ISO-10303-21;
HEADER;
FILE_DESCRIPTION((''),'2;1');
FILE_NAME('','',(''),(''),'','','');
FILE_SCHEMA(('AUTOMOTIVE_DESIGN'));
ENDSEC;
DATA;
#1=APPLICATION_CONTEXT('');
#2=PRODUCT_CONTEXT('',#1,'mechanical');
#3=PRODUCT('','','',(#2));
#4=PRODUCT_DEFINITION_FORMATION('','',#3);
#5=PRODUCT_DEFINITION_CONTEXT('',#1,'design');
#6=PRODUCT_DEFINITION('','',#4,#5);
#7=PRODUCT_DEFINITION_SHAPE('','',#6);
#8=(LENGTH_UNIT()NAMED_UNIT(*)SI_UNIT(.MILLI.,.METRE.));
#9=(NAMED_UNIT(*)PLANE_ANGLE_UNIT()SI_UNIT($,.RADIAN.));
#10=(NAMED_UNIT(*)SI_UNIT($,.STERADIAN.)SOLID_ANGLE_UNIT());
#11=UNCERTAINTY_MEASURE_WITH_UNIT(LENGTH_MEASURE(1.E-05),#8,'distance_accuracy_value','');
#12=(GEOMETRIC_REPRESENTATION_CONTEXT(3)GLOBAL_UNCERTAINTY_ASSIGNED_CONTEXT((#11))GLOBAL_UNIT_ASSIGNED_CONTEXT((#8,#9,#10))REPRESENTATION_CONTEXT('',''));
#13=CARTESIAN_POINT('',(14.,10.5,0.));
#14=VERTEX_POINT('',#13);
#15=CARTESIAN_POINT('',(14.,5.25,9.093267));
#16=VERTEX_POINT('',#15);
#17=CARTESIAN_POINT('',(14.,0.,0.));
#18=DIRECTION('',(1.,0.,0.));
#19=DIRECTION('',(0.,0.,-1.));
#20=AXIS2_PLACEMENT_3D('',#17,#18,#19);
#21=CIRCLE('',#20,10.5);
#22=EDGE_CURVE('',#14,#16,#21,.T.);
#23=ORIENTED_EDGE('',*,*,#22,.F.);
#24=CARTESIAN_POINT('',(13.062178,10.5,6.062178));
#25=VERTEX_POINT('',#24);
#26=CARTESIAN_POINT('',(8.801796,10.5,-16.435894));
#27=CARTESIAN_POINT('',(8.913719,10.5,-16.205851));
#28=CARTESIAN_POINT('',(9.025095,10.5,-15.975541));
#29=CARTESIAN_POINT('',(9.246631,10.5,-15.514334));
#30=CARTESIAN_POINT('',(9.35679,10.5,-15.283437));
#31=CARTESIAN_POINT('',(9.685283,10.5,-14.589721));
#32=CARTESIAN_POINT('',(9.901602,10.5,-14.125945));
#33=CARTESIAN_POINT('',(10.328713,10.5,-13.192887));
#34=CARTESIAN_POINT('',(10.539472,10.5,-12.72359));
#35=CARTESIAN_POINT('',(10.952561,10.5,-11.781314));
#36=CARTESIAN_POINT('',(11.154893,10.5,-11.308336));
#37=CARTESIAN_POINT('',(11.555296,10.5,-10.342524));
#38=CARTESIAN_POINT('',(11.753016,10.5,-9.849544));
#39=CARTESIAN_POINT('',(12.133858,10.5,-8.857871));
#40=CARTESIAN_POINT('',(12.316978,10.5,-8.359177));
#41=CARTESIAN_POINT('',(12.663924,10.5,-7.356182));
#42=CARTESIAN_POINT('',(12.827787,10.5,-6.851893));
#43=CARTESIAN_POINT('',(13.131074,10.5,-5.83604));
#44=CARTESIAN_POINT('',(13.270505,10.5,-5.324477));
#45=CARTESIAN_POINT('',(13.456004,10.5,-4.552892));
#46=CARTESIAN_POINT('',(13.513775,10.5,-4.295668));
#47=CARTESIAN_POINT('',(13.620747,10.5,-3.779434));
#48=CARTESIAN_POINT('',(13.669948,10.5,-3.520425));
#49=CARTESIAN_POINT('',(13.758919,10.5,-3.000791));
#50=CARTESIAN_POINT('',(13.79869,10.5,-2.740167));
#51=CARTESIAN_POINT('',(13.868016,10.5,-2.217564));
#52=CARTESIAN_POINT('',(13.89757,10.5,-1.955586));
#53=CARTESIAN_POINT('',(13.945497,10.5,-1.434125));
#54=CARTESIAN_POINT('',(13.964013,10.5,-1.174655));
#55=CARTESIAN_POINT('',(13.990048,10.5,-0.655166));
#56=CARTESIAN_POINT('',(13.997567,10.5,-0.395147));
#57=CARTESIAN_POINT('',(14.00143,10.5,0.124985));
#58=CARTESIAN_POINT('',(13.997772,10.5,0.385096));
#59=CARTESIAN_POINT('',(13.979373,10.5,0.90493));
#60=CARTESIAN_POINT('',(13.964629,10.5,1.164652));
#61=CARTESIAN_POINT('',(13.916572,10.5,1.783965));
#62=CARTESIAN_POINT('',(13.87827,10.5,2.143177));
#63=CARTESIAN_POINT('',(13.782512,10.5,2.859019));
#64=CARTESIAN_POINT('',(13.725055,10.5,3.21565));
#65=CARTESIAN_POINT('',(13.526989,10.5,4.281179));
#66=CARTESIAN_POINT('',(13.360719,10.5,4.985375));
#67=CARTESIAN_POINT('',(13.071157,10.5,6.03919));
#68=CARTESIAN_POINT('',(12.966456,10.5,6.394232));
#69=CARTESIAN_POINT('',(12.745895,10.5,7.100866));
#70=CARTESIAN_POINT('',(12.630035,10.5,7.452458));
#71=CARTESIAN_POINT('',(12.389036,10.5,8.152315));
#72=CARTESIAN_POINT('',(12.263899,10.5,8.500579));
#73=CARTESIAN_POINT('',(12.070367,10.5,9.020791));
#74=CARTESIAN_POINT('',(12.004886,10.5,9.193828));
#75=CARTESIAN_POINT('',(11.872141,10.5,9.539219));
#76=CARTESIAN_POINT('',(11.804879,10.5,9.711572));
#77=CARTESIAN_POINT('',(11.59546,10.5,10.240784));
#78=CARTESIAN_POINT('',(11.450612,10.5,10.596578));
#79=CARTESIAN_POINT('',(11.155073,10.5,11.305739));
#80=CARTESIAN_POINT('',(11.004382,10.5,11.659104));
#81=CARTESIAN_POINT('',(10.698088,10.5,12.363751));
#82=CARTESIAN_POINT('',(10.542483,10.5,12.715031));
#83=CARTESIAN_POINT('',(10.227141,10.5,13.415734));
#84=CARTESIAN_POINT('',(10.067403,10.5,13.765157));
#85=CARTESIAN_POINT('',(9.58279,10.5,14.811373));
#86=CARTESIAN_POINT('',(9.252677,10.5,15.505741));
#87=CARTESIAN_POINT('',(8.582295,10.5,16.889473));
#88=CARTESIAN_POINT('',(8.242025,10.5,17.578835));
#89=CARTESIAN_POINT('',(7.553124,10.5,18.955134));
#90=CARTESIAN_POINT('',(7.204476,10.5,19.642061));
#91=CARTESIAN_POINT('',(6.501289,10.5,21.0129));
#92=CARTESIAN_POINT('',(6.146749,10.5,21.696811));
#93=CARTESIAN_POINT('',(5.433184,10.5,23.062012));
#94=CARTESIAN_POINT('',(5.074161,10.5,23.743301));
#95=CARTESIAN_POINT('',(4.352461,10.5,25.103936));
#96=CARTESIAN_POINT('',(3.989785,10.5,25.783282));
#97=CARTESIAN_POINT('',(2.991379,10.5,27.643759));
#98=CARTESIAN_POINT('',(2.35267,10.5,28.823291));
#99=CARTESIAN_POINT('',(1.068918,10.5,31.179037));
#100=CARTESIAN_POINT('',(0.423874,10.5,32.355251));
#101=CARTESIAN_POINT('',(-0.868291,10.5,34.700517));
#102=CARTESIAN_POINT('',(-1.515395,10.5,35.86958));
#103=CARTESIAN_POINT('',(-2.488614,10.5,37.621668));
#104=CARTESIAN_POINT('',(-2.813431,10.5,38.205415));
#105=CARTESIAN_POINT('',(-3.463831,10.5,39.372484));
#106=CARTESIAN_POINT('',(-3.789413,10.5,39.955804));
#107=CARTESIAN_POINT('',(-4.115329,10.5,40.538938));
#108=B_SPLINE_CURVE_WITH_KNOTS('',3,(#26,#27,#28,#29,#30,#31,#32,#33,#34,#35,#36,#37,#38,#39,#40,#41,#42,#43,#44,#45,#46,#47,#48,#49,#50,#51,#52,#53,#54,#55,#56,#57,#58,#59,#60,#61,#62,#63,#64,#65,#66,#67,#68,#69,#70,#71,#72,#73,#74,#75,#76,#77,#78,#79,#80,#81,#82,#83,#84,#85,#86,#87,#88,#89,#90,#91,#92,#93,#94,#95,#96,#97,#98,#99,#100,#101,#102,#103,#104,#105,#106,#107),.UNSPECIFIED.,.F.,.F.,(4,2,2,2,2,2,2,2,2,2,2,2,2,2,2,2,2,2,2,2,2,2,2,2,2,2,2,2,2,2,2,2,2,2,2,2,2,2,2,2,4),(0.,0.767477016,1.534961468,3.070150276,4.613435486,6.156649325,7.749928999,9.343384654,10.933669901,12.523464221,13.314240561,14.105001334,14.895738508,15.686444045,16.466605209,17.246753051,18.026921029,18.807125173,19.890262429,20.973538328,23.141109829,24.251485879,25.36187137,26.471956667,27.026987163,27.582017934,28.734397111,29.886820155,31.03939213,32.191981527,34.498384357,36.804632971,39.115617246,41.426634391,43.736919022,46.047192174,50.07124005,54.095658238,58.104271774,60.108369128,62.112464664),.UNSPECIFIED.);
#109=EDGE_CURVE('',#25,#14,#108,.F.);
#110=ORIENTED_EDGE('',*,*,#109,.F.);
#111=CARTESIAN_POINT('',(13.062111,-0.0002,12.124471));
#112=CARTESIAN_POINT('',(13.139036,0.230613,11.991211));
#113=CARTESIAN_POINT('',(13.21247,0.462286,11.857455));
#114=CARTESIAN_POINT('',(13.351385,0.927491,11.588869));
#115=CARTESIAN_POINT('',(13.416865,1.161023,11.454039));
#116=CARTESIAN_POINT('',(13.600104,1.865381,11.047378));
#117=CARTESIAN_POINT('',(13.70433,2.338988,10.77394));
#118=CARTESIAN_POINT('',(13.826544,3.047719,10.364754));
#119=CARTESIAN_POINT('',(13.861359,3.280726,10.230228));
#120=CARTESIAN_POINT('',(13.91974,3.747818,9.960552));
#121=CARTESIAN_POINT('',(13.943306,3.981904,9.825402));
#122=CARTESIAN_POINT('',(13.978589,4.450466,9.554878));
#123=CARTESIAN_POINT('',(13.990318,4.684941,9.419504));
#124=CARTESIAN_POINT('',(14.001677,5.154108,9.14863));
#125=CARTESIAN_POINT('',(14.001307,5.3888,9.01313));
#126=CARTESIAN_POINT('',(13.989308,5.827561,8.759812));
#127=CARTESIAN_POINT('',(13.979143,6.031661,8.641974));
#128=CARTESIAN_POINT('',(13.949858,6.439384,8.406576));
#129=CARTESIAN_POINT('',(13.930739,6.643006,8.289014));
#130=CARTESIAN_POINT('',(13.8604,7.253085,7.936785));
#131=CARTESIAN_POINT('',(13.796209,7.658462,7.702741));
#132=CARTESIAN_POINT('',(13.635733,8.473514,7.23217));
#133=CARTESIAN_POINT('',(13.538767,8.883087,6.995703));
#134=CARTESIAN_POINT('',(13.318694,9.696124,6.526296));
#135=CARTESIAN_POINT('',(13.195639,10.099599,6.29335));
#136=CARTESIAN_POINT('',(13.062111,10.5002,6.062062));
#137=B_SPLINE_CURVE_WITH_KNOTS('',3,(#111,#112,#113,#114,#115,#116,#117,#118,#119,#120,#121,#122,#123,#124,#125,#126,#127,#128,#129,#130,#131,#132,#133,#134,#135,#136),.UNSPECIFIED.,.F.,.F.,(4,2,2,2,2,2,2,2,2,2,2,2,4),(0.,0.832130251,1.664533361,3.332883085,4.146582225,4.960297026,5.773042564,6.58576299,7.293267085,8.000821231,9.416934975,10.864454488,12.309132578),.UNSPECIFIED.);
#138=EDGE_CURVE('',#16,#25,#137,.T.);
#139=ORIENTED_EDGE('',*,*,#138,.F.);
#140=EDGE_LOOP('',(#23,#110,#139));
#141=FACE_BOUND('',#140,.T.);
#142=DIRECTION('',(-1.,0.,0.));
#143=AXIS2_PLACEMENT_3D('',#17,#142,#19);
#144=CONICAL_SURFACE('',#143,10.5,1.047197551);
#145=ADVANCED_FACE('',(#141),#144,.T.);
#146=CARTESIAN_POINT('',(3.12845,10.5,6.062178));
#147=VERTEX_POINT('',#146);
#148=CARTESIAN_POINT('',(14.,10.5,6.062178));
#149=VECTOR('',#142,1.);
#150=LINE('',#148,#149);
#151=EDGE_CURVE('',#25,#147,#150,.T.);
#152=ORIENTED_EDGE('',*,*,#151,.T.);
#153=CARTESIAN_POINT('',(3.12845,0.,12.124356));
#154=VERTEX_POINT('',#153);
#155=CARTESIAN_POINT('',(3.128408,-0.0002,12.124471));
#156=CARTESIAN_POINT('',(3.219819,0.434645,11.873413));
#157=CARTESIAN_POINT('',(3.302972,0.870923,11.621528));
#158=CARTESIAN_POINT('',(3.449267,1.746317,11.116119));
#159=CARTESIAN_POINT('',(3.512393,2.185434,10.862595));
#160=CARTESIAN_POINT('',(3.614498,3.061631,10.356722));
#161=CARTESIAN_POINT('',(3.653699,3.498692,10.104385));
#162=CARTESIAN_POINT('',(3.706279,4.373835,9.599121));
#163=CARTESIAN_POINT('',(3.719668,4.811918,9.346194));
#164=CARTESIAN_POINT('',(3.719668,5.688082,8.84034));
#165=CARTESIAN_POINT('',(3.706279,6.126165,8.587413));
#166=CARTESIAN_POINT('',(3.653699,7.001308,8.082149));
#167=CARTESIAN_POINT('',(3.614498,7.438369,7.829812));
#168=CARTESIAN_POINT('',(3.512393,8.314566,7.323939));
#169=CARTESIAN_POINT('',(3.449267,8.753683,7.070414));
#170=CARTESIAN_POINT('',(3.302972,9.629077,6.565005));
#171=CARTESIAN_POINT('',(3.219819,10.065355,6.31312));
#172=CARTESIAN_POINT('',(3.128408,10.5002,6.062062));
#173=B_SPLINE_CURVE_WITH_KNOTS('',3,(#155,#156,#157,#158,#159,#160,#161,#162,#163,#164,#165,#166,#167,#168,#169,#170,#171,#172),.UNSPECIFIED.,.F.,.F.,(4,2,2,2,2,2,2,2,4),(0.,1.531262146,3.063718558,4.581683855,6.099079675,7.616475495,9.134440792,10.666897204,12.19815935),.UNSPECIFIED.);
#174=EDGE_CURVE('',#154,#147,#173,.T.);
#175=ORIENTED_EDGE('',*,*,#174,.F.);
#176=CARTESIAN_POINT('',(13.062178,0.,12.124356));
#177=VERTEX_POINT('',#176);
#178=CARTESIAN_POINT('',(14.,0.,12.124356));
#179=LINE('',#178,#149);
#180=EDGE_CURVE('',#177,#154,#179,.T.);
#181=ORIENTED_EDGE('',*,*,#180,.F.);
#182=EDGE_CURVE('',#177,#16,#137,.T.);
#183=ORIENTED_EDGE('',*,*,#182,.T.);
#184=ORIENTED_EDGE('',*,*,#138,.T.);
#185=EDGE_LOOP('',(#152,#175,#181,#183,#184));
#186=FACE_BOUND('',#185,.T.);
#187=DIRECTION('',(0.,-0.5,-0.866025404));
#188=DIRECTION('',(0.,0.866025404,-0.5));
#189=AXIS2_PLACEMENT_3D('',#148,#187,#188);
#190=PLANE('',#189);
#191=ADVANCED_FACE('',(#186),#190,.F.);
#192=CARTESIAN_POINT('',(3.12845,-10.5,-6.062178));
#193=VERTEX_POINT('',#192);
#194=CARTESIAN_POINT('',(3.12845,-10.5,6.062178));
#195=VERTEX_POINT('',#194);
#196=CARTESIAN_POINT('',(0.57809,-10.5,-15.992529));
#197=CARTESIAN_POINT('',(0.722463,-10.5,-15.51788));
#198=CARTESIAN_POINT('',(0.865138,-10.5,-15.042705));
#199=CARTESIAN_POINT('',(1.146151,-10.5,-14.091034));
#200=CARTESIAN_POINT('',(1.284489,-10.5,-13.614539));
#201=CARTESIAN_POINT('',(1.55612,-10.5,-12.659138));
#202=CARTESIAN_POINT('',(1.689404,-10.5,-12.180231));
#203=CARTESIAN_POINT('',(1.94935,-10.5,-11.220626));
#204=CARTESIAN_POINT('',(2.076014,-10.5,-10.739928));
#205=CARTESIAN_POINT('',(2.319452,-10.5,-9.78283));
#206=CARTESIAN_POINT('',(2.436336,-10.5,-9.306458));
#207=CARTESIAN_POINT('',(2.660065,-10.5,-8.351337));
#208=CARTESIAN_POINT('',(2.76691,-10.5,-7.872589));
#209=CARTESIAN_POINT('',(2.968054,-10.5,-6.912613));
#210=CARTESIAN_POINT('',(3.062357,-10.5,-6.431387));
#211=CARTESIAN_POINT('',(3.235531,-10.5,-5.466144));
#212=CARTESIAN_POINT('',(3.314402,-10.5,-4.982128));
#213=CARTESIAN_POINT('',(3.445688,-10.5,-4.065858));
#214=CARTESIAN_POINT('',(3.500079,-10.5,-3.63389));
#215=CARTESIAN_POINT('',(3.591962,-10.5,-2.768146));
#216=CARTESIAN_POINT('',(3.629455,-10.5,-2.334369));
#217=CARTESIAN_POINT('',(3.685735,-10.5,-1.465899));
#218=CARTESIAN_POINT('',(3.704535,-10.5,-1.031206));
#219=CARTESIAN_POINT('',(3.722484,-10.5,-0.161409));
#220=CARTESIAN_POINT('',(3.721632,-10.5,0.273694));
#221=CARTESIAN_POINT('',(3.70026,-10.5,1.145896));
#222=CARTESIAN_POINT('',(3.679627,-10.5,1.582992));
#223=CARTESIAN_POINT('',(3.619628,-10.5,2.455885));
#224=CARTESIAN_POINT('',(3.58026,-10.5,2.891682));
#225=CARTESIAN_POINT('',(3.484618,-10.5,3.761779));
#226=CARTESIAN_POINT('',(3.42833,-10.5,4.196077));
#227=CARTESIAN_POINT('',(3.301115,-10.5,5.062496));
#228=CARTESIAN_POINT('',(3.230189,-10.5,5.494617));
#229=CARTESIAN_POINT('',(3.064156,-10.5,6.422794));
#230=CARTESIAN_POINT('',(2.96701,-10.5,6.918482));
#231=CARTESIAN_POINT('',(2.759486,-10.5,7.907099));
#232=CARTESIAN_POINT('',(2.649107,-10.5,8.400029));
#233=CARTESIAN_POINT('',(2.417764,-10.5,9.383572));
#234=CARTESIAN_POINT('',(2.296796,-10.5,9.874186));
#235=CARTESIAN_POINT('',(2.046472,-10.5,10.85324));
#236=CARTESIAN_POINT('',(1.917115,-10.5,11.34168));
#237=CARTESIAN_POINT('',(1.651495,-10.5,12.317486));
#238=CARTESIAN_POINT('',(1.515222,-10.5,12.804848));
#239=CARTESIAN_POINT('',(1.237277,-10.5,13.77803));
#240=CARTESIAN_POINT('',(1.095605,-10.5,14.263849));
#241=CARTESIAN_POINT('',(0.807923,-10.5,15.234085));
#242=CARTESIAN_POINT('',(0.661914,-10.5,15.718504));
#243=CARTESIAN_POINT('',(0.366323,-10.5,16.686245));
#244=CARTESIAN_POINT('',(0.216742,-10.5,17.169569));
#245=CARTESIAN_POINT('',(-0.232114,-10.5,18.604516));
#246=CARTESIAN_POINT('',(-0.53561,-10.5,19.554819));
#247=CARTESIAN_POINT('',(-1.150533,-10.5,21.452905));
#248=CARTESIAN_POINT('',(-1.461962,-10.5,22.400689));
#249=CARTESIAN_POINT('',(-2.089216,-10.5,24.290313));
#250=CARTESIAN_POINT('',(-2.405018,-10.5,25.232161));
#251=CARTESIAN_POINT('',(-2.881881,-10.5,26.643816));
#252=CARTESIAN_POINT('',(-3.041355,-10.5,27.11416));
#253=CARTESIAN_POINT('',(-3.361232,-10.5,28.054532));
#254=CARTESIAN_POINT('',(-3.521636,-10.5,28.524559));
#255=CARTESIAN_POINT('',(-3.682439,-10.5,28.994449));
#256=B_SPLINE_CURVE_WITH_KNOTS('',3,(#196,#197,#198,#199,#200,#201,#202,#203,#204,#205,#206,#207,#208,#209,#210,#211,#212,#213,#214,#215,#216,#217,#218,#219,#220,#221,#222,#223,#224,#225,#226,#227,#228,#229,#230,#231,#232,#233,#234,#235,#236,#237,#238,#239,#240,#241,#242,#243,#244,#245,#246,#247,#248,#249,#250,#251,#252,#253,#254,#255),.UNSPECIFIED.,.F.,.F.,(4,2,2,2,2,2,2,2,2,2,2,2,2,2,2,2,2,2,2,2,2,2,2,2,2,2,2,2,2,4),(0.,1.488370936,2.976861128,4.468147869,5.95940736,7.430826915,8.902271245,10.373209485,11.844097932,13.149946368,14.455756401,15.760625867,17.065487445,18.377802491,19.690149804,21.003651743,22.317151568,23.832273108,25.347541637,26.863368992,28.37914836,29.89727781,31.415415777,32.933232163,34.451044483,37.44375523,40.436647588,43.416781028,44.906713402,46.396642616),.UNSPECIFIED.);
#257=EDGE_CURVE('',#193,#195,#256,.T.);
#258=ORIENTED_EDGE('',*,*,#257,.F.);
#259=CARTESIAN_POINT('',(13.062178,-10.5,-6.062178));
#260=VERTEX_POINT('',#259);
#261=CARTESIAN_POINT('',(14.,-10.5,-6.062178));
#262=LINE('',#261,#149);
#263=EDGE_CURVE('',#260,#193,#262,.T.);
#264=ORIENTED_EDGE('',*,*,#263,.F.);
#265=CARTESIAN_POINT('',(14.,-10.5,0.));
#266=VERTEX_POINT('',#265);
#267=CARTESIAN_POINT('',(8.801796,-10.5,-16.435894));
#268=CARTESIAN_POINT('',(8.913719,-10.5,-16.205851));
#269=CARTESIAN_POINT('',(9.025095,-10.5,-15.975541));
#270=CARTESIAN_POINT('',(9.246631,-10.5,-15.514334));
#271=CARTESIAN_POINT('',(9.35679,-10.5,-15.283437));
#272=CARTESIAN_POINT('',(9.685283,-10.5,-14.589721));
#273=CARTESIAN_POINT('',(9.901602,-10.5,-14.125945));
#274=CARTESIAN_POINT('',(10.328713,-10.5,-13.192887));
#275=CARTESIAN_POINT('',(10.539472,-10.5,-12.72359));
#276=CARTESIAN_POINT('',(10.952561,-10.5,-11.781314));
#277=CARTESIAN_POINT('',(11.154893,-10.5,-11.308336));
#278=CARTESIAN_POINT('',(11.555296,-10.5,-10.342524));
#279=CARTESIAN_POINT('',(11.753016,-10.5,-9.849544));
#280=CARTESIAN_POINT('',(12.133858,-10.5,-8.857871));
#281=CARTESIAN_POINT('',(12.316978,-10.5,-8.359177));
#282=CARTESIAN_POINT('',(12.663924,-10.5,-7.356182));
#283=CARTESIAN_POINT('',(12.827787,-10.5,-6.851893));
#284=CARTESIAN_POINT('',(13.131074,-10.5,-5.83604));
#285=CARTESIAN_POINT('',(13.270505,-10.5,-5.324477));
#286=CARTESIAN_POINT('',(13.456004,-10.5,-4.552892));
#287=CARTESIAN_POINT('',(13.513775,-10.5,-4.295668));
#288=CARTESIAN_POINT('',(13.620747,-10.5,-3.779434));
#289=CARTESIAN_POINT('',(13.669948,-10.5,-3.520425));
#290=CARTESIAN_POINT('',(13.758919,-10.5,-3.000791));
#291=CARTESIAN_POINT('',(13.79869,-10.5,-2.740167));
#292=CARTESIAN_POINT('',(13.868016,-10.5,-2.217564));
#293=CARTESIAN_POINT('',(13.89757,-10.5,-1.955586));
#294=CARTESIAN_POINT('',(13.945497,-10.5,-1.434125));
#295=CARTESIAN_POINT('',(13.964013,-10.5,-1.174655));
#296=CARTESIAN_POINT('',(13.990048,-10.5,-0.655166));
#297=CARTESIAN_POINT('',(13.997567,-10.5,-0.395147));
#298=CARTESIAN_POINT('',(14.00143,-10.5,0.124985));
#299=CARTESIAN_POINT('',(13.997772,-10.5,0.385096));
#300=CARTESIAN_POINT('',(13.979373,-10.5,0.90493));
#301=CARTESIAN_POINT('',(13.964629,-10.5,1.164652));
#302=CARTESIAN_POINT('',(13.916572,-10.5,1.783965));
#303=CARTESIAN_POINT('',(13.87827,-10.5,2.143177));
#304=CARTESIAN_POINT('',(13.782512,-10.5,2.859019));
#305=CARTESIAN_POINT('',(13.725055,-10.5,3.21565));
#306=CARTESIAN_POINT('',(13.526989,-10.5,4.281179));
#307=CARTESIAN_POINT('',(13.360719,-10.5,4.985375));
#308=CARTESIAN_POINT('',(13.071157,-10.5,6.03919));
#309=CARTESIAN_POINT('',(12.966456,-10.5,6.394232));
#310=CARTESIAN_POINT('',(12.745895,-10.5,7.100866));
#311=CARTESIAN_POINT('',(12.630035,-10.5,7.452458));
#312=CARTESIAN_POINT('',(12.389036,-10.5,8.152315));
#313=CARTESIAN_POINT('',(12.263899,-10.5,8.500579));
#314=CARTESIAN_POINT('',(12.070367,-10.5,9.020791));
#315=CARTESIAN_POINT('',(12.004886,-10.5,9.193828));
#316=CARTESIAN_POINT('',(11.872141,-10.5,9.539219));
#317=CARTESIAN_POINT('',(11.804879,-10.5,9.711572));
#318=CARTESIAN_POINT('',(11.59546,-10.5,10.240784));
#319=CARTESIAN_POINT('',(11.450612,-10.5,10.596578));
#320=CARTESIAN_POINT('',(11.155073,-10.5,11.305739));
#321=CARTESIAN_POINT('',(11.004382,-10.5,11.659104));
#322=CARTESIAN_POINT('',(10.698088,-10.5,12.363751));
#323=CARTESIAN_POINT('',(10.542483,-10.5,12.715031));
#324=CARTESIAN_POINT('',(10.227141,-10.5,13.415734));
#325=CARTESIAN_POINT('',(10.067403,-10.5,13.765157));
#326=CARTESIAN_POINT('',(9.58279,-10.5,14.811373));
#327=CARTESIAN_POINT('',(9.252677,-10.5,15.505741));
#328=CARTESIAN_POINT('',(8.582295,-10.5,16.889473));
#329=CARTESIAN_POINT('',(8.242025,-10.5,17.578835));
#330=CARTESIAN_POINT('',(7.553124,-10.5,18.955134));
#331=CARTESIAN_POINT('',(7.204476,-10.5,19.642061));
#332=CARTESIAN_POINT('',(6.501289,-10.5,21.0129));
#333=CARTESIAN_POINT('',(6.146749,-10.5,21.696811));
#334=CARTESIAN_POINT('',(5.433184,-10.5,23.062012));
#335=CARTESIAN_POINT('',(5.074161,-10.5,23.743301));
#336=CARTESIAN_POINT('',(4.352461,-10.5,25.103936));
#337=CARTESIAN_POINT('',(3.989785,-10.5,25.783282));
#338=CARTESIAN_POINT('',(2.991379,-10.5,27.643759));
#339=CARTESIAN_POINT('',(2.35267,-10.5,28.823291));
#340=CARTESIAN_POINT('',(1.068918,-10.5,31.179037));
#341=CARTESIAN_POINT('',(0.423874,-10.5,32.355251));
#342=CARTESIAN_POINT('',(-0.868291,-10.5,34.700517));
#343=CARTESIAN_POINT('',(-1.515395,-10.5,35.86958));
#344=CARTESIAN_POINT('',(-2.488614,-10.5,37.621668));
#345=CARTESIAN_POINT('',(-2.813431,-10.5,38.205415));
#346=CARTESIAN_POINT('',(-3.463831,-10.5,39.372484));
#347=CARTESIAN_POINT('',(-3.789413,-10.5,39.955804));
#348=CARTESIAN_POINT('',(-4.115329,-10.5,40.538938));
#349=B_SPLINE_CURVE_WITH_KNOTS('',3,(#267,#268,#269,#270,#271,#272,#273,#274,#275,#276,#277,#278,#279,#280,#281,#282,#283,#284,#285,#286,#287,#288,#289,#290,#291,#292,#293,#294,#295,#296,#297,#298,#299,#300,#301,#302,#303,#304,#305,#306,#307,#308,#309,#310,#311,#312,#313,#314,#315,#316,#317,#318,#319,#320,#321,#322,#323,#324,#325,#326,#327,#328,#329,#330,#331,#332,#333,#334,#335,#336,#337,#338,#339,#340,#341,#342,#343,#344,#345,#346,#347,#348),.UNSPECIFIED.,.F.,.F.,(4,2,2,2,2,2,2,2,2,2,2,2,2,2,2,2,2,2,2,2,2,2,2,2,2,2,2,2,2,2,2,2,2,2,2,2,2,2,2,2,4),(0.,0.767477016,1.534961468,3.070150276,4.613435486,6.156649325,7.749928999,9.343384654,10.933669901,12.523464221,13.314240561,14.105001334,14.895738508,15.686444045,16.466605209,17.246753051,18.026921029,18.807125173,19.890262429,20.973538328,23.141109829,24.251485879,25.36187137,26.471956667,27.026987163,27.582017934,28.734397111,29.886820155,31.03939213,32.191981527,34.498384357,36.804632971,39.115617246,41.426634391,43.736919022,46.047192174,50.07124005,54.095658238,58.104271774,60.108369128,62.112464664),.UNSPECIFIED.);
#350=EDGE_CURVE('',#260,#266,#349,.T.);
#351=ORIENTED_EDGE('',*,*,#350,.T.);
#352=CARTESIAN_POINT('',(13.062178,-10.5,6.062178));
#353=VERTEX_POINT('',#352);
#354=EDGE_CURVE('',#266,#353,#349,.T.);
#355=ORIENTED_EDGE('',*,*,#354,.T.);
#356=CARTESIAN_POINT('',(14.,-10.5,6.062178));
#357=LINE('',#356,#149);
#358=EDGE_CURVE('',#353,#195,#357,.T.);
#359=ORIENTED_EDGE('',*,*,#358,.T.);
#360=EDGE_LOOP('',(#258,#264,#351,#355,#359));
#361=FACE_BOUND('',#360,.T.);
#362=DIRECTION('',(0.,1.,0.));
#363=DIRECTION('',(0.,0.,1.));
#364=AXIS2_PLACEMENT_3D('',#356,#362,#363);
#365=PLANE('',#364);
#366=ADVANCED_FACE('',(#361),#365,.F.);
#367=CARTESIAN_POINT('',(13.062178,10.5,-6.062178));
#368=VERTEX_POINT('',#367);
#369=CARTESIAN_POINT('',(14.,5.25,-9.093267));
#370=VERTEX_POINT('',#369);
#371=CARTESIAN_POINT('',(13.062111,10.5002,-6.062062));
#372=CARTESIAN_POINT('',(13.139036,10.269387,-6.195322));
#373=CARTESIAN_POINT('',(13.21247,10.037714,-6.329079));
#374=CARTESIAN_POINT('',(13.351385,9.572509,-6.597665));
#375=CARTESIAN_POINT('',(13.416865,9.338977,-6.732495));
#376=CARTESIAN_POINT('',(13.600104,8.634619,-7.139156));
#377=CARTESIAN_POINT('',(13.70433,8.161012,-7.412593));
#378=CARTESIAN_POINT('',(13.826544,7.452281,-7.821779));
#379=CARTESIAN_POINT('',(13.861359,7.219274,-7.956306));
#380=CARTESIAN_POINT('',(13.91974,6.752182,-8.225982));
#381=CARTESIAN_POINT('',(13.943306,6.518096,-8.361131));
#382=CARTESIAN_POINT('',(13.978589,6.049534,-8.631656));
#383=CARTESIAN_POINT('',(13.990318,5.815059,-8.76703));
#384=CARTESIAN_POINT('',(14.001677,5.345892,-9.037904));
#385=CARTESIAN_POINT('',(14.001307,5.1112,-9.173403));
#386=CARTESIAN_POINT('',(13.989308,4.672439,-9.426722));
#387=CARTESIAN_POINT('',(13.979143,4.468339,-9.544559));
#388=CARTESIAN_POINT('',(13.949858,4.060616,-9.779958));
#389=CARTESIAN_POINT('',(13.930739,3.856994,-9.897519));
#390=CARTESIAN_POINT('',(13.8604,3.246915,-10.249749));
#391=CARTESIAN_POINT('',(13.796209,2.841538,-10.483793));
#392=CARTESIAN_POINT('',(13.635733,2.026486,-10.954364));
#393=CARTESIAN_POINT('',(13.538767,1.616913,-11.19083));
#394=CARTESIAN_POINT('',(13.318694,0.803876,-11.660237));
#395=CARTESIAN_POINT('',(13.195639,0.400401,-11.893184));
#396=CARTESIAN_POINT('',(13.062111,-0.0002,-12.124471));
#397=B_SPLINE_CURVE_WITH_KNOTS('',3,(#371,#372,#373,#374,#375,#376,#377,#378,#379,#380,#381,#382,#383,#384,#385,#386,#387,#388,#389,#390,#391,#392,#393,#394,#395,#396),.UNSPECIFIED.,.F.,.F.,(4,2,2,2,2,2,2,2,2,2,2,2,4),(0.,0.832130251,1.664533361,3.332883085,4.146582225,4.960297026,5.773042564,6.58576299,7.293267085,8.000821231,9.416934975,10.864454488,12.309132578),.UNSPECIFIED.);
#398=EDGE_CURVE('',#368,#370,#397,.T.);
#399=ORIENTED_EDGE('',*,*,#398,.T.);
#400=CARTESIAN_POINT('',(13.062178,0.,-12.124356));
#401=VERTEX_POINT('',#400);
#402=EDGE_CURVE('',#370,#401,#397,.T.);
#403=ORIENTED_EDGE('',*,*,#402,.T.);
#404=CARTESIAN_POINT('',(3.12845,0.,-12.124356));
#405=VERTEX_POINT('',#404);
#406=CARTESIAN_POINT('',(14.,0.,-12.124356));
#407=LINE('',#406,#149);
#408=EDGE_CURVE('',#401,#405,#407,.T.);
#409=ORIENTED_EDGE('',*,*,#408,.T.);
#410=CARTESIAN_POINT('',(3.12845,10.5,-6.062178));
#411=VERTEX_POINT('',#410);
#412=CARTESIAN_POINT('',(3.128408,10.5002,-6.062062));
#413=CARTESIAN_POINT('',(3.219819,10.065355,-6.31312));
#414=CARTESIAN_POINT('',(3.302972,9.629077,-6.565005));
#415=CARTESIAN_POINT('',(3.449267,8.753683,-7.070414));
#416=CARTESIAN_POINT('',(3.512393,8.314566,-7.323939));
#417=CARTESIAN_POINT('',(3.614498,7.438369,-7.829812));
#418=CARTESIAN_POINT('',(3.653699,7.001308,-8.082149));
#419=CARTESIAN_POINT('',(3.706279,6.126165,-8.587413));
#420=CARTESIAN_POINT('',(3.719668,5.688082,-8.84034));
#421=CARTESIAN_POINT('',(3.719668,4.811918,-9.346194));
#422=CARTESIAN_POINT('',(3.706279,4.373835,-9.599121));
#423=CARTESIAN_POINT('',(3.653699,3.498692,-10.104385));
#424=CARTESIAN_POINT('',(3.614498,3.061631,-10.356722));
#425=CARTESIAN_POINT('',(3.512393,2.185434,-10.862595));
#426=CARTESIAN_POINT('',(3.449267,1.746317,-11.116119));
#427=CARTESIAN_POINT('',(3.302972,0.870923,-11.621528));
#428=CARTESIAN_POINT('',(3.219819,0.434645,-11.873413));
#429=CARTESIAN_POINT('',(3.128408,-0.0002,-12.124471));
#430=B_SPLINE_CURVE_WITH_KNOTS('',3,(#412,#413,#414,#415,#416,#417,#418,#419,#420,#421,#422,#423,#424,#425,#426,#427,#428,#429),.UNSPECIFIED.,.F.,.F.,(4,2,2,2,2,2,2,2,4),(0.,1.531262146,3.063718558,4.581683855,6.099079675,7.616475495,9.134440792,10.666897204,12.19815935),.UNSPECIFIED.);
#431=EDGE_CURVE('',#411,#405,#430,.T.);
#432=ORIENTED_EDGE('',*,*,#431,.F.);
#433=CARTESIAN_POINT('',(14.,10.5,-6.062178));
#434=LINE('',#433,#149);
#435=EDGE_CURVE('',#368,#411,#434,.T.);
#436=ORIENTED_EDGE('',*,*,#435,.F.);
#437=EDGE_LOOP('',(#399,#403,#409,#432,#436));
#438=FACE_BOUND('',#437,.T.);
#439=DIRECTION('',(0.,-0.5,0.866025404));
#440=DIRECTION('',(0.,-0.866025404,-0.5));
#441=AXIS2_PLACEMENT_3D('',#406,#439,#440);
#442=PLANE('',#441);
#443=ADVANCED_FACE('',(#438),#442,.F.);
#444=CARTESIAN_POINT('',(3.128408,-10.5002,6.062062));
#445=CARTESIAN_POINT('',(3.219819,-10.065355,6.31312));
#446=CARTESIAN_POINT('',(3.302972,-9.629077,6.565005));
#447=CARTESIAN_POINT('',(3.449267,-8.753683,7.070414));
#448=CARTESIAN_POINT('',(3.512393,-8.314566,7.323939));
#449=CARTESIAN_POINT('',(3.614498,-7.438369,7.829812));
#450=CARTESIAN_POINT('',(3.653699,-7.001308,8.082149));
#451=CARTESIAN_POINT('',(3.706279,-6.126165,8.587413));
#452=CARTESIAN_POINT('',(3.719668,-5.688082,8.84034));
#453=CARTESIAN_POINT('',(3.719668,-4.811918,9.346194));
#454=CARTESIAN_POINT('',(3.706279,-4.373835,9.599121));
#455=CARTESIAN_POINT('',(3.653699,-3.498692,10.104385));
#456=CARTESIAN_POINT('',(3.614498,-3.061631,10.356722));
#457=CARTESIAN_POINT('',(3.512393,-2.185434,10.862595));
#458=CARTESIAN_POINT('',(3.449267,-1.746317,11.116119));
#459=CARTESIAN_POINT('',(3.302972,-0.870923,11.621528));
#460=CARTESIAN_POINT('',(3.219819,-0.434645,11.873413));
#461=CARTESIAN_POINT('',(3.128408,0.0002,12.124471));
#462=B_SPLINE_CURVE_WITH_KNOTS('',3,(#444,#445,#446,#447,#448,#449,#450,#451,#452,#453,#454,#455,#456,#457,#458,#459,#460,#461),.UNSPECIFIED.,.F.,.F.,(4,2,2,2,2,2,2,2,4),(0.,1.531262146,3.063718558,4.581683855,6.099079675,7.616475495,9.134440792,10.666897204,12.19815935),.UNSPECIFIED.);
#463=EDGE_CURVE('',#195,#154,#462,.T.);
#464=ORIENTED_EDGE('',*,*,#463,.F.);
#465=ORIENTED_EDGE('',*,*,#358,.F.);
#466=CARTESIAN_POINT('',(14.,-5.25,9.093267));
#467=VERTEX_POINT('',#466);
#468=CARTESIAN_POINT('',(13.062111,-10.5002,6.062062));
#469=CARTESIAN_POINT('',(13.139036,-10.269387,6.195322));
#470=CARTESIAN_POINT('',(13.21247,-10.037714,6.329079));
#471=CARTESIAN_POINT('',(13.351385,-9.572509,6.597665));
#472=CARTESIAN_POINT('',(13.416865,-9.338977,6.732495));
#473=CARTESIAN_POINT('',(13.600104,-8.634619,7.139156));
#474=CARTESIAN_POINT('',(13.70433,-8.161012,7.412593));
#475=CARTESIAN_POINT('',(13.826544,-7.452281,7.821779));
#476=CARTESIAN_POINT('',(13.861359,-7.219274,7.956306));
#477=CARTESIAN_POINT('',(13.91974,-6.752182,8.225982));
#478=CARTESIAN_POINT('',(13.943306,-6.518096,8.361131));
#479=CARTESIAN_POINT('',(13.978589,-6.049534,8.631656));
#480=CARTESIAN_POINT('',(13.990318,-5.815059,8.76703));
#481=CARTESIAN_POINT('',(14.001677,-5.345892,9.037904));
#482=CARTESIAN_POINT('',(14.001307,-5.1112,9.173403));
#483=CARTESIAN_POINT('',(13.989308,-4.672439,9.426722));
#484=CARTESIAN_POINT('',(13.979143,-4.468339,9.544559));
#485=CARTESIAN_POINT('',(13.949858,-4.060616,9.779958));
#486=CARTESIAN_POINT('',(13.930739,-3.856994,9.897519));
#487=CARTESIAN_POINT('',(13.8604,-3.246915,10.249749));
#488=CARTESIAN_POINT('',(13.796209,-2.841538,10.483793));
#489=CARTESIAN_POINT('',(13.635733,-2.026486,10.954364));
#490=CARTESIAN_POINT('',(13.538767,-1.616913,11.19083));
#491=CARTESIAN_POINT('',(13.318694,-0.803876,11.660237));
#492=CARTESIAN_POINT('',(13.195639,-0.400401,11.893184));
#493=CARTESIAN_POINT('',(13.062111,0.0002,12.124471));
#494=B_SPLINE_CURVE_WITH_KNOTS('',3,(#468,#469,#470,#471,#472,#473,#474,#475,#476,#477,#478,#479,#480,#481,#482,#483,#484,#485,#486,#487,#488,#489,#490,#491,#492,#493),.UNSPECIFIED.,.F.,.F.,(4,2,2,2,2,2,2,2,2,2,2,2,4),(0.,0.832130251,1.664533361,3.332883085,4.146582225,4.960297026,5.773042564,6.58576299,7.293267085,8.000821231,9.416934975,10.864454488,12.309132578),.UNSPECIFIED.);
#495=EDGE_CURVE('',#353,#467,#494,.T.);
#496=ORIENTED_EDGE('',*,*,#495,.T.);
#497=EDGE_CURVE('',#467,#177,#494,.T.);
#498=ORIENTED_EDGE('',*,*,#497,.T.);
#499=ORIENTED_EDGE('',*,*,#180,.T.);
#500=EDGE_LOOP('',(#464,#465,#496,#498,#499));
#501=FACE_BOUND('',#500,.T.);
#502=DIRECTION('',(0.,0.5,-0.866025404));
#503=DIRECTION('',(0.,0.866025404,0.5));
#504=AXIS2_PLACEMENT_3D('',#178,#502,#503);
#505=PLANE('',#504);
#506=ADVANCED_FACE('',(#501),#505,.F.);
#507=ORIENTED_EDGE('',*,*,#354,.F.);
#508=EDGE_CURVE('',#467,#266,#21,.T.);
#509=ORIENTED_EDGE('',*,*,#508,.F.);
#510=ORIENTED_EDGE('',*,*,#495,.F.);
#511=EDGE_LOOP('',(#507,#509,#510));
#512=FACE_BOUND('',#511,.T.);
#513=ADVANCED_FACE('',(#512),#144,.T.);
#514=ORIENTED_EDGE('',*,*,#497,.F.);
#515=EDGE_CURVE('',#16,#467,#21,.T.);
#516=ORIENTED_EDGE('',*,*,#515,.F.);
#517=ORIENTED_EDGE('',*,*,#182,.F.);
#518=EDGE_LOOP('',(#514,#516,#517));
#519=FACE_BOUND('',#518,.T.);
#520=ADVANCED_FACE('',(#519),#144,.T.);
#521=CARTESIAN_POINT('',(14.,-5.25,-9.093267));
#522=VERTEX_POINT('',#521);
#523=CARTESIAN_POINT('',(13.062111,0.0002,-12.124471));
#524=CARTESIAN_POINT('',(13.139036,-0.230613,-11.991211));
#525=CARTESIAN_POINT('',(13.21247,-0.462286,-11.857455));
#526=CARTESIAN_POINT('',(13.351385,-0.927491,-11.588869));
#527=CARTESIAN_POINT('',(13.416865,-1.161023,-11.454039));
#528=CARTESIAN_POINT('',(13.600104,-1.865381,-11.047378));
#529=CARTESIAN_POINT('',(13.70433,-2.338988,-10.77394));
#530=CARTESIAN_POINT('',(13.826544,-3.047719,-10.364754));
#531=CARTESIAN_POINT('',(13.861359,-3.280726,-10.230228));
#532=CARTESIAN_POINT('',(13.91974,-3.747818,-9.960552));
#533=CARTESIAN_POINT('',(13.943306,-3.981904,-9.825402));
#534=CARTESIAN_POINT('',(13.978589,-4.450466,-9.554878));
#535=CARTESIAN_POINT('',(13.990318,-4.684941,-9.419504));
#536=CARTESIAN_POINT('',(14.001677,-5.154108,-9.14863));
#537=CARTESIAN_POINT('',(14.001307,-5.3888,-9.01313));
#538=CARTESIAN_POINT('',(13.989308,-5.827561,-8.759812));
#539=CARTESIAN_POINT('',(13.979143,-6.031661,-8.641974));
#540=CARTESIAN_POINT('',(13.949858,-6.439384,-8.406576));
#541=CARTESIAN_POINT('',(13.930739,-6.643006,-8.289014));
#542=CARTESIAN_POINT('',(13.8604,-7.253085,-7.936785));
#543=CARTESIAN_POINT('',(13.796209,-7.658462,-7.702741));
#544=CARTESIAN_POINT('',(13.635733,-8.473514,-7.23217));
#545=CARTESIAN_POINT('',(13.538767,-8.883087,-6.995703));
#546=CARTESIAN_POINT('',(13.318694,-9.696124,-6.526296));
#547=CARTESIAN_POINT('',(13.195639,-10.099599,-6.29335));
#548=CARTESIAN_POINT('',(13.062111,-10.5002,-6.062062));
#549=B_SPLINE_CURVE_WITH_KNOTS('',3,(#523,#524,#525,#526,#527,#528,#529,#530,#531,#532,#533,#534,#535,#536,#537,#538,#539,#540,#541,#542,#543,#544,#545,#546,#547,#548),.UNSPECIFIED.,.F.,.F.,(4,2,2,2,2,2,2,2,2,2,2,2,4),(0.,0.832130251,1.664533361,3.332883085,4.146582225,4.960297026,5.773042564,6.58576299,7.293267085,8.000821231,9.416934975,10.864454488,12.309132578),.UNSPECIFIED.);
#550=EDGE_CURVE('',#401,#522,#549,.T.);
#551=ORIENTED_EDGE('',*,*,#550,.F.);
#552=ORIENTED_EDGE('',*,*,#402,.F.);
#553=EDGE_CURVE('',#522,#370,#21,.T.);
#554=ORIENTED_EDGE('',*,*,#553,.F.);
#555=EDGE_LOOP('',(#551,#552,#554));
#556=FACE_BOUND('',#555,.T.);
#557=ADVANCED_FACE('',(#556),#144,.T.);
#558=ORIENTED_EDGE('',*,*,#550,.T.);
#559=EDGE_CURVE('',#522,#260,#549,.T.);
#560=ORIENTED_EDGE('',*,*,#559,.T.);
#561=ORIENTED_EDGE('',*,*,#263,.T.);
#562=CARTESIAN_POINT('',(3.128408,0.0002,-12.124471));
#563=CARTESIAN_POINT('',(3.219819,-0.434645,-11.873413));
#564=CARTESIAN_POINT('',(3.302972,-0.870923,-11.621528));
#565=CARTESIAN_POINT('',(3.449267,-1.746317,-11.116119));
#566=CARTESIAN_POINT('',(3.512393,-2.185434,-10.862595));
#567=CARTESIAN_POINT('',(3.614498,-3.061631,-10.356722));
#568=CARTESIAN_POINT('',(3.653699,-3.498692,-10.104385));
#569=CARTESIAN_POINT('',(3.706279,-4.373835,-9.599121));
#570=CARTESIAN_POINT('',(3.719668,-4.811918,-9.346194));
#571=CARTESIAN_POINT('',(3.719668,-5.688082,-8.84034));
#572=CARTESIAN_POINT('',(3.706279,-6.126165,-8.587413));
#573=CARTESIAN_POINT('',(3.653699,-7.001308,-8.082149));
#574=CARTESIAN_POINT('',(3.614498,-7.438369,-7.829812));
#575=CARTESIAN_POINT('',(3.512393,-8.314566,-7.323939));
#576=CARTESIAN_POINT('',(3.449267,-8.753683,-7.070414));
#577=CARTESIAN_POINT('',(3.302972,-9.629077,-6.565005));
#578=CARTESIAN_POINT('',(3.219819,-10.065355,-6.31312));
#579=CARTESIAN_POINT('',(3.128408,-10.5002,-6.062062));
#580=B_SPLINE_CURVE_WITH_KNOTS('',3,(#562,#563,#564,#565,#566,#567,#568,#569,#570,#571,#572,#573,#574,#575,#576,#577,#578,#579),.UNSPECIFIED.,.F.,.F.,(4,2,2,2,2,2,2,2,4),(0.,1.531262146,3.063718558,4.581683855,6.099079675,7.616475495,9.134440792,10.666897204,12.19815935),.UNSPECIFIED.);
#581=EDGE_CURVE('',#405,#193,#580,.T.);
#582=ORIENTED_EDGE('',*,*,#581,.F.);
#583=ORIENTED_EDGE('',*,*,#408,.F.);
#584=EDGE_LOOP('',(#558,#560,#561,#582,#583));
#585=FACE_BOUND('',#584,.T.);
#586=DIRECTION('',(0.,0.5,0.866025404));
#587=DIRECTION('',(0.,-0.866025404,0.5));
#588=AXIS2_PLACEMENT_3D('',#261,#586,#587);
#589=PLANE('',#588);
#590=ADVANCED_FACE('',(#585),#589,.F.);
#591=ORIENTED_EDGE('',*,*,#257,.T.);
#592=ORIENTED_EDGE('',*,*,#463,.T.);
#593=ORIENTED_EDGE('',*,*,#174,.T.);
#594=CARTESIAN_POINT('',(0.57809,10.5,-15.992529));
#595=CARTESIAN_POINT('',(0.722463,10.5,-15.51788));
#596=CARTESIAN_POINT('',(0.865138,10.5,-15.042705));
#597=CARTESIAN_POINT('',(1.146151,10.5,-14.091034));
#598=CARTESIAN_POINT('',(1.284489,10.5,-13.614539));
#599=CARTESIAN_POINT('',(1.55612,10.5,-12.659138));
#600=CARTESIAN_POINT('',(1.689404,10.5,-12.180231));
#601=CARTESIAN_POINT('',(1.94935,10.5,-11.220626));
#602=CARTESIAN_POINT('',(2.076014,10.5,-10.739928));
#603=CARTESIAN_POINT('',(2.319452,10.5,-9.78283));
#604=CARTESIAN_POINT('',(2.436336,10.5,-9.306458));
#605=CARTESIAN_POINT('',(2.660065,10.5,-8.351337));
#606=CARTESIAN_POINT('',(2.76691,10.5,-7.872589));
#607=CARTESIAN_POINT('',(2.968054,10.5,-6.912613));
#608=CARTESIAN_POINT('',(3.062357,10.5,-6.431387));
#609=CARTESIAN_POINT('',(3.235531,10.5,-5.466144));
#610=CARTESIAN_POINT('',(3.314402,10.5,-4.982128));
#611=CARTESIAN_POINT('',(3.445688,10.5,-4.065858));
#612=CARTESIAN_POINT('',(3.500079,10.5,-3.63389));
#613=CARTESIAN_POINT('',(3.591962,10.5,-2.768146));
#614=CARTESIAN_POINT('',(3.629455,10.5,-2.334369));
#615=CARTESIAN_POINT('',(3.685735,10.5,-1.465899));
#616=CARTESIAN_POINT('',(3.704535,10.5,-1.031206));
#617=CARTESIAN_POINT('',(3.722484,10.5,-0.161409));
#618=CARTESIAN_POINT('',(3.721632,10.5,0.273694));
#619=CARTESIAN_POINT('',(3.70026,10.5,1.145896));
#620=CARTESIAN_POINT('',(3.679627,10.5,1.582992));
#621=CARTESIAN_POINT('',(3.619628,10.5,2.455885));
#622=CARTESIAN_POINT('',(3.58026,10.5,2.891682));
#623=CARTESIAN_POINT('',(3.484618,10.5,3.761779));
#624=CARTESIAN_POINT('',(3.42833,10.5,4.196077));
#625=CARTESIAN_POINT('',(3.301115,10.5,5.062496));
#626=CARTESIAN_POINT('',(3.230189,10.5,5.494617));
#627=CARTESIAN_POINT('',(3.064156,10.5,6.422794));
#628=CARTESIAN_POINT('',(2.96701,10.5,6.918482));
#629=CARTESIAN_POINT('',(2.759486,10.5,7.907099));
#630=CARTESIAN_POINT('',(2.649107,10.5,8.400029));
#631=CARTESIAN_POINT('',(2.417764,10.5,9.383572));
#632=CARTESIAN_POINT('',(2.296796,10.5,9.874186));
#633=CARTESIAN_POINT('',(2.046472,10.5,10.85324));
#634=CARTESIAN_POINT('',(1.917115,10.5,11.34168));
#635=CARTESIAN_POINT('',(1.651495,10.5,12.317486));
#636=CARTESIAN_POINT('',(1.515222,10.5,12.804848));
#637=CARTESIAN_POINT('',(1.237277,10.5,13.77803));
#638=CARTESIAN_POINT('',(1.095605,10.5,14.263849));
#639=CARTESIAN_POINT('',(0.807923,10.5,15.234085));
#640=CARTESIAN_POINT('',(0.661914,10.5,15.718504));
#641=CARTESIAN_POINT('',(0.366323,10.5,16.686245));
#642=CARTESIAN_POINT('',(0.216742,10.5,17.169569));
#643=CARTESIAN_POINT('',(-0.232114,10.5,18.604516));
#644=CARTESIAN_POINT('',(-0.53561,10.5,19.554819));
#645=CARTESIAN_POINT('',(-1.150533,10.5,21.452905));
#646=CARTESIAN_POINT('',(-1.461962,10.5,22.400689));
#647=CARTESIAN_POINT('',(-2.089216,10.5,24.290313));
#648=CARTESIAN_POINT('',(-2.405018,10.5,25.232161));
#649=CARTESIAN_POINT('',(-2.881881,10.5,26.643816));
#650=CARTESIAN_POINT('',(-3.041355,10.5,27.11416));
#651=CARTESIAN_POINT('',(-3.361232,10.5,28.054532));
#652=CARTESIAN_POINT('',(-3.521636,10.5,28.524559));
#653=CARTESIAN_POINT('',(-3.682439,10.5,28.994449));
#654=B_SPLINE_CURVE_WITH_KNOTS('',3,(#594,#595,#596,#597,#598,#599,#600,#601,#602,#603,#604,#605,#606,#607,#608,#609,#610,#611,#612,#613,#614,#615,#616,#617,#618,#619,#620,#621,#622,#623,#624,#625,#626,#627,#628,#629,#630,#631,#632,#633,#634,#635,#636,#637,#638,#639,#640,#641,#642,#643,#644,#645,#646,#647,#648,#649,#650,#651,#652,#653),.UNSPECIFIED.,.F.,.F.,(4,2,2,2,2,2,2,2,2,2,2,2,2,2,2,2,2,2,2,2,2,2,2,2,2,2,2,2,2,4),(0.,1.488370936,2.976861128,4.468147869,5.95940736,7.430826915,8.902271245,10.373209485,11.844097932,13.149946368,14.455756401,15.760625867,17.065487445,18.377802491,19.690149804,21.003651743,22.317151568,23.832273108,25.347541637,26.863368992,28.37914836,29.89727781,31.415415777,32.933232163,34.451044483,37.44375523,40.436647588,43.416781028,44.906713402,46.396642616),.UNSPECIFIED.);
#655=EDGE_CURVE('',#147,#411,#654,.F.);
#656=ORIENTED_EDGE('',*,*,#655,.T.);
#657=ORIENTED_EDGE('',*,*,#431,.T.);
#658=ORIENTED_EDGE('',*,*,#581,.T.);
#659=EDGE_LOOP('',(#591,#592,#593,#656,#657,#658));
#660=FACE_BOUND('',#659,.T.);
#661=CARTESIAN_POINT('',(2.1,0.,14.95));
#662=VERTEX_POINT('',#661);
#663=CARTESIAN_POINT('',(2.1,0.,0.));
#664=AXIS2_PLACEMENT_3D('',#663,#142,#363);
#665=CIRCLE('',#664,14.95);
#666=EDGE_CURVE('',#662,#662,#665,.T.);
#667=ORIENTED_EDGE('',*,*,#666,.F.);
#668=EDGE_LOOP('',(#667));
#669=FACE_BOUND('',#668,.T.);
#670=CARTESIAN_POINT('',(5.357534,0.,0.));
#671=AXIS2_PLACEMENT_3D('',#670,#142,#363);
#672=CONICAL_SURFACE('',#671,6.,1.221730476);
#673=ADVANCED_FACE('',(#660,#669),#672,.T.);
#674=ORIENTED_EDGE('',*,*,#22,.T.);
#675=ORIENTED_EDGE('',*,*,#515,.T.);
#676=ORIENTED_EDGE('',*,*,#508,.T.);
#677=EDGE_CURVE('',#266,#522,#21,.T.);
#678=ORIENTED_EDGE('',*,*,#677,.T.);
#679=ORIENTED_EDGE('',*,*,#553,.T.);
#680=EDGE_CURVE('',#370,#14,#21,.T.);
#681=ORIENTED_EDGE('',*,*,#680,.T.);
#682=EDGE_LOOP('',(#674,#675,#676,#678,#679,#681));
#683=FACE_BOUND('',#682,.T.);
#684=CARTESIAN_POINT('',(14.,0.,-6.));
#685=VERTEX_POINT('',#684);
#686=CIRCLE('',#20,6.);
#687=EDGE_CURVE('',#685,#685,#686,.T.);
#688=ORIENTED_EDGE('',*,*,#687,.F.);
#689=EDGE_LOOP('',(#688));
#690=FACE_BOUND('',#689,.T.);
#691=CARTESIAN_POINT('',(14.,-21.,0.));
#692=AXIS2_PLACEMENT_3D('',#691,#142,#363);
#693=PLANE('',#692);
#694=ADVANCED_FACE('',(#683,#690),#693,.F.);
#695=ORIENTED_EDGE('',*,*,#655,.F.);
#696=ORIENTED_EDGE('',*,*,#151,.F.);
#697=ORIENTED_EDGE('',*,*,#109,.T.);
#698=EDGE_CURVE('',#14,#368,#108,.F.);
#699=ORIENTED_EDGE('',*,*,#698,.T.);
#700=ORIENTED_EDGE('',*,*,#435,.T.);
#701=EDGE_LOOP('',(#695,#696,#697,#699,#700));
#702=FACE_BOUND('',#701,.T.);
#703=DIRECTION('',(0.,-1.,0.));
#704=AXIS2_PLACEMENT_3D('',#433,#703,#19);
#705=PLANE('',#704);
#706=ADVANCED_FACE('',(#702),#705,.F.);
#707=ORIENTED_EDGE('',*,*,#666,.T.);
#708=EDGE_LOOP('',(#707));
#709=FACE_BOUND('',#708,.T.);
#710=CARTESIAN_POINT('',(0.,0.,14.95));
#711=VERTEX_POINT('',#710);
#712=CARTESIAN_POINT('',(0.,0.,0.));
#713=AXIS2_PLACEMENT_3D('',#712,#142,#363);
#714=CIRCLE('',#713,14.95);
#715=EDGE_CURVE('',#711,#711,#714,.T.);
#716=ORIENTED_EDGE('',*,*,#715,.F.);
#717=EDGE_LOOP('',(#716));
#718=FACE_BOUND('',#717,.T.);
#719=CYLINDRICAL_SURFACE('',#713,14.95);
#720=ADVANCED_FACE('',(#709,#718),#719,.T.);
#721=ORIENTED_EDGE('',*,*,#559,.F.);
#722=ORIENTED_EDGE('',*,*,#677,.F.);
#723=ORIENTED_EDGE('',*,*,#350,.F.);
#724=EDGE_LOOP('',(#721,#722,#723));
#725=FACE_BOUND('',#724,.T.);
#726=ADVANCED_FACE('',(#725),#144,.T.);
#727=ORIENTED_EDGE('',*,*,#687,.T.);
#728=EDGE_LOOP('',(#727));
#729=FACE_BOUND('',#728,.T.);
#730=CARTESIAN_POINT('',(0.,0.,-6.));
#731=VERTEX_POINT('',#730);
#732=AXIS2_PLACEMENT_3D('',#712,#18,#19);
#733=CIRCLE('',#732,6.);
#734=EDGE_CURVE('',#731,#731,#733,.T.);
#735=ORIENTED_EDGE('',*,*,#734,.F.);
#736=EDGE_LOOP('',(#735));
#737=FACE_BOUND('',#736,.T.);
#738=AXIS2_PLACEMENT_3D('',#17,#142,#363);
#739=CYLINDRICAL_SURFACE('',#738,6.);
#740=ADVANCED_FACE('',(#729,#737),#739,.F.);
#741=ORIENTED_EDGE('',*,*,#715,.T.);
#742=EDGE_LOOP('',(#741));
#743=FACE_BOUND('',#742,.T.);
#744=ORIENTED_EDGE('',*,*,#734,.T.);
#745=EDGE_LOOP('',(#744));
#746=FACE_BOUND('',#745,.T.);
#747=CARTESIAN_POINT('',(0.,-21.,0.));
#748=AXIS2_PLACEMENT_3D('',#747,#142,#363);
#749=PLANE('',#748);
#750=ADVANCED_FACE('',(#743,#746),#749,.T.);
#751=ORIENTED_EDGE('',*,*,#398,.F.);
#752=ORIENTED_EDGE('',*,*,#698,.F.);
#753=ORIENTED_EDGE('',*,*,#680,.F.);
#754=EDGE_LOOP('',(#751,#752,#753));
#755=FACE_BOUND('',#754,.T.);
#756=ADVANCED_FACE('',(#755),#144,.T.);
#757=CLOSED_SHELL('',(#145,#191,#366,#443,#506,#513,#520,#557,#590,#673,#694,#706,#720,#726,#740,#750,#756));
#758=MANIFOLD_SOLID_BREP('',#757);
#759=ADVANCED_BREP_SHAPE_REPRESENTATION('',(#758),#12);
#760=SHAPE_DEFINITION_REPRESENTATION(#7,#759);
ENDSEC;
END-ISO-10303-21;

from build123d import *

# Parameters (mm, degrees)
SKETCH1_R      = 6
EXTRUDE1_DEPTH = 14


# Read off the part's stored shape, not the designer's step: Cut-Extrude1
with BuildPart() as part:
    # Sketch1 → Extrude1 (new body)
    with BuildSketch(Plane(origin=(0, 0, 0), x_dir=(0, 0, -1), z_dir=(1, 0, 0))):
        Polygon((12.124355653, 0), (6.062177826, 10.5), (-6.062177826, 10.5), (-12.124355653, 0), (-6.062177826, -10.5), (6.062177826, -10.5), align=None)
        Circle(SKETCH1_R, mode=Mode.SUBTRACT)
    extrude(amount=EXTRUDE1_DEPTH)

    # Cut-Extrude1 outline → Cut-Extrude1 (revolve, cut)
    with BuildSketch(Plane.YX):
        Polygon((12.124355657, 14.000000022), (10.499999982, 14.000000022), (12.124355657, 13.062177824), align=None)
    revolve(axis=Axis((0, 0, 0), (1, 0, 0)), mode=Mode.SUBTRACT)

    # Sketch3 → Revolve1 (revolve)
    with BuildSketch(Plane.XY, mode=Mode.PRIVATE) as revolve1_sk:
        Polygon((0, 6), (0, 14.95), (2.1, 14.95), (5.357533597, 6), align=None)
    revolve(revolve1_sk.sketch.rotate(Axis((0, 0, 0), (1, 0, 0)), 90), axis=Axis((0, 0, 0), (1, 0, 0)))


solid = part.part
